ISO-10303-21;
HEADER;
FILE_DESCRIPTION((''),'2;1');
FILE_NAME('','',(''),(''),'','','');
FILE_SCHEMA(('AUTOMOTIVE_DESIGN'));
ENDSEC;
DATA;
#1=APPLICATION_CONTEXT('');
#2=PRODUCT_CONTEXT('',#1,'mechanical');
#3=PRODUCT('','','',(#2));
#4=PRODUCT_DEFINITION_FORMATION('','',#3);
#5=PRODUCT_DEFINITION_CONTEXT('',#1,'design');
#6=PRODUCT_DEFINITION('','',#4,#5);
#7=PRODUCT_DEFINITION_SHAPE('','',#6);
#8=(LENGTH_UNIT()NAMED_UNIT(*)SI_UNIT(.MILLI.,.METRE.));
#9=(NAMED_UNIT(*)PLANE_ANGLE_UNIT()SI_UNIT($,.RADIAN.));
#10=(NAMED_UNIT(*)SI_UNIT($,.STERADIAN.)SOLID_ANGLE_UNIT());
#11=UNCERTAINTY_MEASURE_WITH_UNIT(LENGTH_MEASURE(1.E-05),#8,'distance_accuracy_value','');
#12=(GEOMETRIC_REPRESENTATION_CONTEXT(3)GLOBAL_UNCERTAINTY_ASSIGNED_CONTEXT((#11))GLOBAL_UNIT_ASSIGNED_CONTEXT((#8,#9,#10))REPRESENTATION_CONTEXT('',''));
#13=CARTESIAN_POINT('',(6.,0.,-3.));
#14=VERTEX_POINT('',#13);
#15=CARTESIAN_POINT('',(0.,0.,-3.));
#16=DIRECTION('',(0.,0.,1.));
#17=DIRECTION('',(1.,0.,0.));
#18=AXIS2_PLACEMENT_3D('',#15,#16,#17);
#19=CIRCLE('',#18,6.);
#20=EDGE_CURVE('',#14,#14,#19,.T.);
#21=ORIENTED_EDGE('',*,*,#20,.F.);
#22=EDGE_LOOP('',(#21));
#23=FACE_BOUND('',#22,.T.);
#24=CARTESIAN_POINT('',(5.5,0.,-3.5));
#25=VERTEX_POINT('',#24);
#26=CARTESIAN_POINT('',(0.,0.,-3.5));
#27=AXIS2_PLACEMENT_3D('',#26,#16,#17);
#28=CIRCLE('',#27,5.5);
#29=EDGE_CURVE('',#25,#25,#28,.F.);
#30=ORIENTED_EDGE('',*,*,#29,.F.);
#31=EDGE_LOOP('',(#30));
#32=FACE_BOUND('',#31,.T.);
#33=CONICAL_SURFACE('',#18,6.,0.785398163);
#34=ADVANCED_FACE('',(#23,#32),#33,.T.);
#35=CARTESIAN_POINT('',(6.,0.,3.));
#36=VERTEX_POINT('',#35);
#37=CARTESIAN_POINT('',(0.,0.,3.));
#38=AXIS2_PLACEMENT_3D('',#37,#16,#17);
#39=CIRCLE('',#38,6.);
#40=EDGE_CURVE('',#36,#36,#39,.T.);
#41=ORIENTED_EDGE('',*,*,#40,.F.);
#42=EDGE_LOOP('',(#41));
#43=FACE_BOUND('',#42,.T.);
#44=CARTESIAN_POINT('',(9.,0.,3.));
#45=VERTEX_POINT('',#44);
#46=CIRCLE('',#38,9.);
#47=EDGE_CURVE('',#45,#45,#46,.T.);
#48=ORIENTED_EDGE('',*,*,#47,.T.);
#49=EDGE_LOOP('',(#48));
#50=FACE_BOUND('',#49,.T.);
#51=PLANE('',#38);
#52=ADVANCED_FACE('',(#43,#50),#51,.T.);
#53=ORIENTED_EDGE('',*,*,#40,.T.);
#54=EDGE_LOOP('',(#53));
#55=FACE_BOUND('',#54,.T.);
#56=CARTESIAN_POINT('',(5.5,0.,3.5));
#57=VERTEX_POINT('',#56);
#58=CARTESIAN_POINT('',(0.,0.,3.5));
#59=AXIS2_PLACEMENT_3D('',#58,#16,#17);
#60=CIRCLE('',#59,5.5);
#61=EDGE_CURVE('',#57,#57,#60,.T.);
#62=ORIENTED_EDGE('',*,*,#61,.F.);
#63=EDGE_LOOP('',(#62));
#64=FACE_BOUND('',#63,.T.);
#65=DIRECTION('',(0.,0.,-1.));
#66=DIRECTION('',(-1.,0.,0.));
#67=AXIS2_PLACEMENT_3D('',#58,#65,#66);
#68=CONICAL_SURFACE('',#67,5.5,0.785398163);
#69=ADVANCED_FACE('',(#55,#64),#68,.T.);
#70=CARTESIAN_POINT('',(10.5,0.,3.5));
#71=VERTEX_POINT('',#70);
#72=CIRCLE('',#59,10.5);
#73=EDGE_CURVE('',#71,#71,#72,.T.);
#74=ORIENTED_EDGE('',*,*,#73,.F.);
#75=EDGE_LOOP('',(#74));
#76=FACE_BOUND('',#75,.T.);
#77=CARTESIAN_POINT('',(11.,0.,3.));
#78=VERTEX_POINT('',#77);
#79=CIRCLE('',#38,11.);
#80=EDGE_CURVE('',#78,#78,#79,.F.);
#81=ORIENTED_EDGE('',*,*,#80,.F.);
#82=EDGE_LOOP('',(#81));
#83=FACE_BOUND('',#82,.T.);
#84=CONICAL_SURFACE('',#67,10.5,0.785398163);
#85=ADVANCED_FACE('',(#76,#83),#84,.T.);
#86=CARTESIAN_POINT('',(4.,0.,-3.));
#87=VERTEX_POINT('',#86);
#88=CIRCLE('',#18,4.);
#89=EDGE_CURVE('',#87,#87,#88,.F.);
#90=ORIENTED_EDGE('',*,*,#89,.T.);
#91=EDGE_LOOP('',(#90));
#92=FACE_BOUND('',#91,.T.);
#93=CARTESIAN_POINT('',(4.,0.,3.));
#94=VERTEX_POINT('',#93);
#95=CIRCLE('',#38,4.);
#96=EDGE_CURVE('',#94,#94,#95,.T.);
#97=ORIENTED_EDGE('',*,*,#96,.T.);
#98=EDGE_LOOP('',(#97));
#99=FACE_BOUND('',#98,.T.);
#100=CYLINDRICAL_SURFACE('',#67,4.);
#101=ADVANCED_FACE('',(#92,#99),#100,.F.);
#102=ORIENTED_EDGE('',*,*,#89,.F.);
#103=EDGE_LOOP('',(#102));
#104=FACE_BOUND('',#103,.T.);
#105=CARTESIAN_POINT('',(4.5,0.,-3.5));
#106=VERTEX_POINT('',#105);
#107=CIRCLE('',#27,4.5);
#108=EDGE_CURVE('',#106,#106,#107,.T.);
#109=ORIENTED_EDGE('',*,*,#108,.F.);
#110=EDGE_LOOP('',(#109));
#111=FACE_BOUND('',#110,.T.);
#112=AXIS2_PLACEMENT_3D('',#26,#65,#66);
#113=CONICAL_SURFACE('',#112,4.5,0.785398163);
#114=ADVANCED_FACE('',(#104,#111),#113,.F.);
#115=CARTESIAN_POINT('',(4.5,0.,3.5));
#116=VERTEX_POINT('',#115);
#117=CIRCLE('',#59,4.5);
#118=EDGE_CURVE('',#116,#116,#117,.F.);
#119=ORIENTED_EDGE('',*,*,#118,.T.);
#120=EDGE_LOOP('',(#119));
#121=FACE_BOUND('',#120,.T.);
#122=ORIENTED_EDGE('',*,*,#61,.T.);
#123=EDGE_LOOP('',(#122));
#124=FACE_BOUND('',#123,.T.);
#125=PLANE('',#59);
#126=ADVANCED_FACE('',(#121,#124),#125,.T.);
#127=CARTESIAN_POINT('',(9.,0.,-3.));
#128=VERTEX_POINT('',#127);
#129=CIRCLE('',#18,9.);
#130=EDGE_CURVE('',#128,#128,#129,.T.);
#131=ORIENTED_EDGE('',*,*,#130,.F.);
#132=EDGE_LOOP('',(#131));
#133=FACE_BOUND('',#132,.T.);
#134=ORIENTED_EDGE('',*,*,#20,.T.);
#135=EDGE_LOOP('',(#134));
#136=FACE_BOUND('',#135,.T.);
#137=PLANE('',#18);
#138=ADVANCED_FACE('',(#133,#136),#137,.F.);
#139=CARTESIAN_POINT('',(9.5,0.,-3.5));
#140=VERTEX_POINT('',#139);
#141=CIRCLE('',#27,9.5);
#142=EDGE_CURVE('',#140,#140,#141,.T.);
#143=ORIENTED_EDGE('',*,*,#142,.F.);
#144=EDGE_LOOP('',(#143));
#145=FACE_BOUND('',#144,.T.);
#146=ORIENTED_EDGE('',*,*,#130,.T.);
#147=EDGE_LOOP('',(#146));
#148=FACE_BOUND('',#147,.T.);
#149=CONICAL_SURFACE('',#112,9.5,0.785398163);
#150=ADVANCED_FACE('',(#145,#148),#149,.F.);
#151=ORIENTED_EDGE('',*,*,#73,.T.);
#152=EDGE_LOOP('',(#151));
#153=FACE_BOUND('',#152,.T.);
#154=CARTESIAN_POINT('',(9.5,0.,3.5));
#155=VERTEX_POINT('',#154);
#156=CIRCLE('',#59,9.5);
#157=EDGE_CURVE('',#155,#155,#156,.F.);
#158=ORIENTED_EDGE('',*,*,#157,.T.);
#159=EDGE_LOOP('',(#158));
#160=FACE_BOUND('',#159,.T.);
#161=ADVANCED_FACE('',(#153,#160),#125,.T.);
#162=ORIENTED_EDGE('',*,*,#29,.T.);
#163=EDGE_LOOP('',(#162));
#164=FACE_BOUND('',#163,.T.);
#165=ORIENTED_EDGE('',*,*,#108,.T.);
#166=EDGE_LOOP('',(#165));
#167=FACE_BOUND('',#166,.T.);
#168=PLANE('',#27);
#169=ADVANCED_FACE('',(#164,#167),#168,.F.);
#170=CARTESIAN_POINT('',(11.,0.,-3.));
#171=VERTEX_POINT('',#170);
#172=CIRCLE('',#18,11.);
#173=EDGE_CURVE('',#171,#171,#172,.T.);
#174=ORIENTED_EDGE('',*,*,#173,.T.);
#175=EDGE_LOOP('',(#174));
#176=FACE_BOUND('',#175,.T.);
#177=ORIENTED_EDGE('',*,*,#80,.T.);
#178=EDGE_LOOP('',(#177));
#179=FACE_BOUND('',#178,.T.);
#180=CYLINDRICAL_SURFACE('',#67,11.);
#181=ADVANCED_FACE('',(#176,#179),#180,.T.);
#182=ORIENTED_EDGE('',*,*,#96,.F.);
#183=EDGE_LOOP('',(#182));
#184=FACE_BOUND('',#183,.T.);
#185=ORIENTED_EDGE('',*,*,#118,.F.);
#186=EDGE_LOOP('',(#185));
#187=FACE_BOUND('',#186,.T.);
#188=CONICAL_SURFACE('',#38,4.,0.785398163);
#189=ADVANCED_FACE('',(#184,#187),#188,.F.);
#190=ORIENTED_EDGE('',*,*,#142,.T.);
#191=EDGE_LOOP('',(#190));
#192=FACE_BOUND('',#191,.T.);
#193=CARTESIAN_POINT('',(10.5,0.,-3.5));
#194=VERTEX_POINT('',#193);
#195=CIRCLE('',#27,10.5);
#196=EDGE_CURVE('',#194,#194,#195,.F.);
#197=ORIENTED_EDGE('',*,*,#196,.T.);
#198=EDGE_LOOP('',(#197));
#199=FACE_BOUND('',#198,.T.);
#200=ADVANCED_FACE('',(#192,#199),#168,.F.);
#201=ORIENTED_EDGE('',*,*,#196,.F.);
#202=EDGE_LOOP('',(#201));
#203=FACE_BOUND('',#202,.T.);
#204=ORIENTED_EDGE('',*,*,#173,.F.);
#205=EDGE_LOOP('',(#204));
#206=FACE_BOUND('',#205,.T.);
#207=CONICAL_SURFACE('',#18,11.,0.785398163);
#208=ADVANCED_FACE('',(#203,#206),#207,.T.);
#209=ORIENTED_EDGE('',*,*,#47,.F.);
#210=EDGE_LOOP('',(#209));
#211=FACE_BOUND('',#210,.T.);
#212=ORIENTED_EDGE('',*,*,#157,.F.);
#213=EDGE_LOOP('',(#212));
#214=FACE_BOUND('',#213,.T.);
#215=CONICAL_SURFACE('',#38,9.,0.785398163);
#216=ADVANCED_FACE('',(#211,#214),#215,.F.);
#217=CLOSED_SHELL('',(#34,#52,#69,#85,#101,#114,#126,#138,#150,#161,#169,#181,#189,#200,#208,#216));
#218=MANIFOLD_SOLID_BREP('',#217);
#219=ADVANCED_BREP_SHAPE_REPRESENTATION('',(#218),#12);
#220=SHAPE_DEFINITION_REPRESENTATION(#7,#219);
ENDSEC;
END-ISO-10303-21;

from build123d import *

# Parameters (mm, degrees)
SKETCH1_R           = 11
SKETCH1_R_2         = 4
BOSS_EXTRUDE1_DEPTH = 3.5
CUT_EXTRUDE1_START  = -3.5
SKETCH1_3_R         = 9
SKETCH1_3_R_2       = 6
CUT_EXTRUDE1_DEPTH  = 0.5
CUT_EXTRUDE2_START  = 3
SKETCH1_4_R         = 9
SKETCH1_4_R_2       = 6
CUT_EXTRUDE2_DEPTH  = 0.5
CHAMFER1_SIZE       = 0.5


with BuildPart() as part:
    # Sketch1 → Boss-Extrude1 (new, symmetric)
    with BuildSketch(Plane.XY):
        Circle(SKETCH1_R)
        Circle(SKETCH1_R_2, mode=Mode.SUBTRACT)
    extrude(amount=BOSS_EXTRUDE1_DEPTH, both=True)

    # Sketch1<3> → Cut-Extrude1 (cut)
    with BuildSketch(Plane.XY.offset(CUT_EXTRUDE1_START)):
        Circle(SKETCH1_3_R)
        Circle(SKETCH1_3_R_2, mode=Mode.SUBTRACT)
    extrude(amount=CUT_EXTRUDE1_DEPTH, mode=Mode.SUBTRACT)

    # Sketch1<4> → Cut-Extrude2 (cut)
    with BuildSketch(Plane.XY.offset(CUT_EXTRUDE2_START)):
        Circle(SKETCH1_4_R)
        Circle(SKETCH1_4_R_2, mode=Mode.SUBTRACT)
    extrude(amount=CUT_EXTRUDE2_DEPTH, mode=Mode.SUBTRACT)

    # Chamfer1
    chamfer1_edges = [part.edges().sort_by_distance(p)[0] for p in [
        (-6, 0, -3.5),
        (-9, 0, -3.5),
        (-11, 0, -3.5),
        (-9, 0, 3.5),
        (-6, 0, 3.5),
        (-11, 0, 3.5),
        (-4, 0, -3.5),
        (-4, 0, 3.5),
    ]]
    chamfer(chamfer1_edges, length=CHAMFER1_SIZE - 0.0001)  # a hair under: the kernel refuses the full size


solid = part.part
